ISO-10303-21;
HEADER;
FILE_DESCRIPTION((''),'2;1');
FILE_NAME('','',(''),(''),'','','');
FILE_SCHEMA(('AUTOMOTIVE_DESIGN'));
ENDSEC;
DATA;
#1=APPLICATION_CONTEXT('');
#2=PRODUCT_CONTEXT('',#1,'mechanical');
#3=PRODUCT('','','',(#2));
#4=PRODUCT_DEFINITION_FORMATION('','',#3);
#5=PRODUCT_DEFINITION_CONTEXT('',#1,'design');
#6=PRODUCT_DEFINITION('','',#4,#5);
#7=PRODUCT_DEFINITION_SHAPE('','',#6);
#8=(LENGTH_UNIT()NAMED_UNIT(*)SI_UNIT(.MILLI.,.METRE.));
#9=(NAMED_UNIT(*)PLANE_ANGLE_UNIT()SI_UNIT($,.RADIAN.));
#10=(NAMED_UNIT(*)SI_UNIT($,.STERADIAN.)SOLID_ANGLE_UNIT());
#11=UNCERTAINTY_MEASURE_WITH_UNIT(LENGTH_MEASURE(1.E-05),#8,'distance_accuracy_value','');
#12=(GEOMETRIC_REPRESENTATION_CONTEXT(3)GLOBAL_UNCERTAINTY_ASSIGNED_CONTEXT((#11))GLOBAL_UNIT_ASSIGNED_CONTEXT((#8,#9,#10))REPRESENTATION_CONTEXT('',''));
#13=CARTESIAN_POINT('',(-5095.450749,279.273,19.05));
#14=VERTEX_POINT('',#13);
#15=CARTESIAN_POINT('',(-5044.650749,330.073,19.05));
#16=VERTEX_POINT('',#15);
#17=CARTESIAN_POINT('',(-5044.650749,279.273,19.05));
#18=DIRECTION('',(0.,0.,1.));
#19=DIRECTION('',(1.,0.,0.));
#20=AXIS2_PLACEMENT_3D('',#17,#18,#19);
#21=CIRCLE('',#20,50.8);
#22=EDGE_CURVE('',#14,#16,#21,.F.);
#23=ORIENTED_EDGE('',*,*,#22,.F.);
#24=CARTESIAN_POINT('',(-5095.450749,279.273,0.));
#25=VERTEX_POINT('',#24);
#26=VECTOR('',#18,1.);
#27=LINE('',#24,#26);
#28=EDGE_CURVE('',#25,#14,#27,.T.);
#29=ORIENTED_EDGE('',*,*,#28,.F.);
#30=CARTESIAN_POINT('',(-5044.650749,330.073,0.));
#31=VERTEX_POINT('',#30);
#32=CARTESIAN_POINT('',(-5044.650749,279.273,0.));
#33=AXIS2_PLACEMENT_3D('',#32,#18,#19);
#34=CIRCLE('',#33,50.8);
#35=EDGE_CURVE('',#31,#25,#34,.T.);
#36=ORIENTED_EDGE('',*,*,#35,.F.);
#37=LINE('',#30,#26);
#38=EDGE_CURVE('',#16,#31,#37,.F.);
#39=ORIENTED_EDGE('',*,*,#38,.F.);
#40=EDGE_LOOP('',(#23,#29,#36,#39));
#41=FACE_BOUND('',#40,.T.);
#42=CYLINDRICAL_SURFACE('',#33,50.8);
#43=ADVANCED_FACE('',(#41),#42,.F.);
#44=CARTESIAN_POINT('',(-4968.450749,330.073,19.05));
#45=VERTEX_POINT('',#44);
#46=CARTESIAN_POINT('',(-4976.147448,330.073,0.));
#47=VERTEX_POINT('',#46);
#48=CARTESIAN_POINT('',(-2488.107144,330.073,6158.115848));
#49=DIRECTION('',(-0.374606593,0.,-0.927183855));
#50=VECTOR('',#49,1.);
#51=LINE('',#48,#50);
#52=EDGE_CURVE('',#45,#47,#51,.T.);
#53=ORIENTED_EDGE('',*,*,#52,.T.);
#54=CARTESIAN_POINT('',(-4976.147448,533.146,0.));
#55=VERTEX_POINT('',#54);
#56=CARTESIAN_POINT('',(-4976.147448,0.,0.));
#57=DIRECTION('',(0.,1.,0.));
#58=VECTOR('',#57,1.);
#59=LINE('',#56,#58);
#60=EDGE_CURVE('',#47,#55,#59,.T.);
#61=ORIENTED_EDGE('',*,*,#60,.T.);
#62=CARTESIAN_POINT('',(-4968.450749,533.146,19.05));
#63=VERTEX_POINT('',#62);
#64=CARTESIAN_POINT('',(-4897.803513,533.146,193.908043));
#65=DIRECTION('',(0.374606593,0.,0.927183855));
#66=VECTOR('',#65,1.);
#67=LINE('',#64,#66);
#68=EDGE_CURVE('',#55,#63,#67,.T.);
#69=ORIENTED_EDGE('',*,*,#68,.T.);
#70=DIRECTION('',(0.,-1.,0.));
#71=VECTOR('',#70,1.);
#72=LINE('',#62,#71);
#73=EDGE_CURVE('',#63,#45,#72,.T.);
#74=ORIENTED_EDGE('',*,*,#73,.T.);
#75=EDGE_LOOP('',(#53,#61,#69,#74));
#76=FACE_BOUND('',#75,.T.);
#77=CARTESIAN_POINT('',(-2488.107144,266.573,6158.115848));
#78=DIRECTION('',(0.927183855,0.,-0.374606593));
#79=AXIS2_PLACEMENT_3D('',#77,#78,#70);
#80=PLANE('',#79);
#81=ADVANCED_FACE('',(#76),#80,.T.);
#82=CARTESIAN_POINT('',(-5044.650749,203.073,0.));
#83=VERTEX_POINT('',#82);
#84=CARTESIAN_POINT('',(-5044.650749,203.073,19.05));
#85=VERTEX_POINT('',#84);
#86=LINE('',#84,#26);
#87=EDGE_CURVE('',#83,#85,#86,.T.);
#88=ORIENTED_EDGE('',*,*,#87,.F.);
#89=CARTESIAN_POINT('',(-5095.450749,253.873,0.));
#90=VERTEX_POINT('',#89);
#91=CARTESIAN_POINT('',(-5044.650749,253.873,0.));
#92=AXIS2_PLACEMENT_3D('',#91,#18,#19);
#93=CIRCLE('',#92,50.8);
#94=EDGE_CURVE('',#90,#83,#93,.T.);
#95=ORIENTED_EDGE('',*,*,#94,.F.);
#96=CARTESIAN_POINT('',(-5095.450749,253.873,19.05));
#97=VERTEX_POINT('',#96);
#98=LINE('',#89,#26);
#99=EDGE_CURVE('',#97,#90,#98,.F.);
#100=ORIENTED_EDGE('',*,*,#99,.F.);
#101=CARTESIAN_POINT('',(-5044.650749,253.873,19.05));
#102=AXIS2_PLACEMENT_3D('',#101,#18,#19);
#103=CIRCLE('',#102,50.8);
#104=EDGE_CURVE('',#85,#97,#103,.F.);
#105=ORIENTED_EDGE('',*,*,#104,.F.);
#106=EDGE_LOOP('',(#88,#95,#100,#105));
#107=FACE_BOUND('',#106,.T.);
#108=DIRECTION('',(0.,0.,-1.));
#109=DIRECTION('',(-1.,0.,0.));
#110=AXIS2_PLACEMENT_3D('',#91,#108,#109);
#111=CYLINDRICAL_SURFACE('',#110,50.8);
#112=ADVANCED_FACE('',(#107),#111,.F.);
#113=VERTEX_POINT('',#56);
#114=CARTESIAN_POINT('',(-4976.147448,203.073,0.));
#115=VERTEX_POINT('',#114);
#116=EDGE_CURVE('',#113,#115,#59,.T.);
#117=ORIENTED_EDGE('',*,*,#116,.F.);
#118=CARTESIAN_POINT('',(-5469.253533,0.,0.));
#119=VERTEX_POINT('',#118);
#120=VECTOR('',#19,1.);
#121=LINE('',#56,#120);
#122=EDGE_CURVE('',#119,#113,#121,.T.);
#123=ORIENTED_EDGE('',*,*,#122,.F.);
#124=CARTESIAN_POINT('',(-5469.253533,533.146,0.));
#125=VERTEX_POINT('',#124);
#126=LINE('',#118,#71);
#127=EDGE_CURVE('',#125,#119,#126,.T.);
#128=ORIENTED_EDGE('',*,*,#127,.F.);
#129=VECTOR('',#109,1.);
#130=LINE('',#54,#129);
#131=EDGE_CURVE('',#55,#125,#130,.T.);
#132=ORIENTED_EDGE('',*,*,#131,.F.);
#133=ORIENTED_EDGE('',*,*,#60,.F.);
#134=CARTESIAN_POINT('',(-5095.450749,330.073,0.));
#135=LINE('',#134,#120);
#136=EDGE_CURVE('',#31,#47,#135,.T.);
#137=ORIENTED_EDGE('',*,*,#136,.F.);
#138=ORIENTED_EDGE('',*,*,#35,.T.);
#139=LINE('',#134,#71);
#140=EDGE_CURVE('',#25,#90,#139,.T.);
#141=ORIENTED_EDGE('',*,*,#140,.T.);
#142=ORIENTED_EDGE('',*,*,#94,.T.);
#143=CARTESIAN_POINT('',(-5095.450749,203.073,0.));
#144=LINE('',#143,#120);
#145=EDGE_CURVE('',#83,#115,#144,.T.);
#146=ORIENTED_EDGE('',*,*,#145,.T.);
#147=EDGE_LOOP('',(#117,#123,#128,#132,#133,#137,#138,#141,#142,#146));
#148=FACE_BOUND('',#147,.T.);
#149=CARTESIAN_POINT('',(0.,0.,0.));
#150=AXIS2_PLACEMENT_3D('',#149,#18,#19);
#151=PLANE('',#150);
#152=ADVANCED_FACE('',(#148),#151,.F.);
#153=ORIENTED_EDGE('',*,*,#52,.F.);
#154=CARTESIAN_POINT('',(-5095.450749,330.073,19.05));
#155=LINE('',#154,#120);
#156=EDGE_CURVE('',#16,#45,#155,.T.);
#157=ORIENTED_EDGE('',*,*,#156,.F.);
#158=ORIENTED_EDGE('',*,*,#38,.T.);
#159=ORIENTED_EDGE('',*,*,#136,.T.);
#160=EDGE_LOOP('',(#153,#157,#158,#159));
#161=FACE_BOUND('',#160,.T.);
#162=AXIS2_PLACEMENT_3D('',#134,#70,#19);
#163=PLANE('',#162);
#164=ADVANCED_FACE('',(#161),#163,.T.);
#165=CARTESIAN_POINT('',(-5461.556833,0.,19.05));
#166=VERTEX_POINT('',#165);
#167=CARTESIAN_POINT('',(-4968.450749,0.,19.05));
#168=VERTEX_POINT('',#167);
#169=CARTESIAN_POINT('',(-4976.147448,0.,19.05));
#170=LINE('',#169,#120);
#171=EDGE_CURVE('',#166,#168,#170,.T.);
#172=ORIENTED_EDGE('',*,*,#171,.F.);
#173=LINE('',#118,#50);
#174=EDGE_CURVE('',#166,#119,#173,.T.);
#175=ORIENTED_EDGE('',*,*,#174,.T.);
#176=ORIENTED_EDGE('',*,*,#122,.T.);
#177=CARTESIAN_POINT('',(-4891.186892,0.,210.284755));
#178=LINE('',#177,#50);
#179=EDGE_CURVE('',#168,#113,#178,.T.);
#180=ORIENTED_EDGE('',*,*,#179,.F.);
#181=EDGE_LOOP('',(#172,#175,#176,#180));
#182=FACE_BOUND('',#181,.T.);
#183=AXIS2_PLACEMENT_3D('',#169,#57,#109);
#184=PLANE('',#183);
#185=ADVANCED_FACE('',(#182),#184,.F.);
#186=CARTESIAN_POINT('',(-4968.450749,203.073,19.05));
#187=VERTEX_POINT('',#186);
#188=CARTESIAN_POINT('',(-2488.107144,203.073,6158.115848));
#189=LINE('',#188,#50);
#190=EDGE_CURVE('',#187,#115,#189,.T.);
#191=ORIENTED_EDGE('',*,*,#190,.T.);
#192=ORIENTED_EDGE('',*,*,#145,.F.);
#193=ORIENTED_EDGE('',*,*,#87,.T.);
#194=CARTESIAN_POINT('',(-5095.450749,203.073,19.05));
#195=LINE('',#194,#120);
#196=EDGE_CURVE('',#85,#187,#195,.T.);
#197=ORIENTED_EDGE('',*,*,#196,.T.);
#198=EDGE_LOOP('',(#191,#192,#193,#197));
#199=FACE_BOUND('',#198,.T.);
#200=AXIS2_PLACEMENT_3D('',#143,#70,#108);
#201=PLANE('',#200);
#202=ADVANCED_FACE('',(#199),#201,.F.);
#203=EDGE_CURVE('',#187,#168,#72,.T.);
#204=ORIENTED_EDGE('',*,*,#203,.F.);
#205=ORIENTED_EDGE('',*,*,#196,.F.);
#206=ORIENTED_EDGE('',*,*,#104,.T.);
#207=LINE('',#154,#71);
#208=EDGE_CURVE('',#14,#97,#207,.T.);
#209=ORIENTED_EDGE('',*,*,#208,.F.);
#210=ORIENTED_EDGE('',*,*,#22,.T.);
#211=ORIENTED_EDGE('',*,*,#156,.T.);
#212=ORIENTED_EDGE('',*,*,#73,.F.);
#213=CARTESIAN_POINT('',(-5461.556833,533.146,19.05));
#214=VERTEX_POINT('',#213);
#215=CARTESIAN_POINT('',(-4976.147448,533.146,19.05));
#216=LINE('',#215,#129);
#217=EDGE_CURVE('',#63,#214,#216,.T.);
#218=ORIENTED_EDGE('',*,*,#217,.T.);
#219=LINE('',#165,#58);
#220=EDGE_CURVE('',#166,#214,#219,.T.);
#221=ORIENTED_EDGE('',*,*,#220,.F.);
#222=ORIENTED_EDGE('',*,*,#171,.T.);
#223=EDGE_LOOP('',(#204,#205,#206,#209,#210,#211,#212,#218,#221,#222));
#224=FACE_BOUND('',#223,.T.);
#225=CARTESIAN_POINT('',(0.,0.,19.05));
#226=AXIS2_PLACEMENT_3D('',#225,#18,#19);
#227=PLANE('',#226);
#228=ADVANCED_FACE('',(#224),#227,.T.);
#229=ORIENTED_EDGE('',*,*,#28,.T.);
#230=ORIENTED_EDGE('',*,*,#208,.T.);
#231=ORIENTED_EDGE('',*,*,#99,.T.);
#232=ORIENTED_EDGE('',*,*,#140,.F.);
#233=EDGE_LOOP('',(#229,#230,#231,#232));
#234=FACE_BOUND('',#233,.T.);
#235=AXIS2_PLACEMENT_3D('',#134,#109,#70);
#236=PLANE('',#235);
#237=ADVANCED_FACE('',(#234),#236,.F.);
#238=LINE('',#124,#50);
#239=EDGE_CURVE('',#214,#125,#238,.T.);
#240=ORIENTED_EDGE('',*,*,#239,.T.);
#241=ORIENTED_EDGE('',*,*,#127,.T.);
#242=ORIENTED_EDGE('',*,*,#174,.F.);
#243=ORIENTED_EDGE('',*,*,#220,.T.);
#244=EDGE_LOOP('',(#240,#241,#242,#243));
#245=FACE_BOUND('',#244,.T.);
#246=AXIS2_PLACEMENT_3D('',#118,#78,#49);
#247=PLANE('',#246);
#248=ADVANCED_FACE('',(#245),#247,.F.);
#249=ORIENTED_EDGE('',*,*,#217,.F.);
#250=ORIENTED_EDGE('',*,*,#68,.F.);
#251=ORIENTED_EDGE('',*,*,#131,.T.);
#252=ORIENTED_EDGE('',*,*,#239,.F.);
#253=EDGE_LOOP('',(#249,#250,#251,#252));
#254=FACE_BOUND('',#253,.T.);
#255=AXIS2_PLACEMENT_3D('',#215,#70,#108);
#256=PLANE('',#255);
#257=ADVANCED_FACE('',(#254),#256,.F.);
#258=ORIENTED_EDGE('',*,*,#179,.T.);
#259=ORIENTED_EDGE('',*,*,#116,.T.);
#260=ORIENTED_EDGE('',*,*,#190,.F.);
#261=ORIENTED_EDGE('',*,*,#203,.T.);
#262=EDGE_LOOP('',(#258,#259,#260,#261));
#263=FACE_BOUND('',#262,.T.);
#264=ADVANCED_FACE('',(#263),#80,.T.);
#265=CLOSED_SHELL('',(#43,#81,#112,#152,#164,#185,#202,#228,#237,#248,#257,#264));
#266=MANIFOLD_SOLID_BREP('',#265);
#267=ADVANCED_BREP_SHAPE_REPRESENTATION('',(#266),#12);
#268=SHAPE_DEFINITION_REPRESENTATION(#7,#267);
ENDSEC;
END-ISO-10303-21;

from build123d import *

# Parameters (mm, degrees)
SKETCH1_W           = 493.106084352
SKETCH1_H           = 533.146
BOSS_EXTRUDE1_DEPTH = 19.05
BOSS_EXTRUDE3_DEPTH = 533.146
CUT_EXTRUDE1_DEPTH  = 5496.210802379
SKETCH5_W           = 127
SKETCH5_H           = 127
CUT_EXTRUDE2_DEPTH  = 5496.210802379
FILLET1_R           = 50.8


with BuildPart() as part:
    # Sketch1 → Boss-Extrude1 (new body)
    with BuildSketch(Plane.XY):
        with Locations((-5222.700490325, 266.573)):
            Rectangle(SKETCH1_W, SKETCH1_H)
    extrude(amount=BOSS_EXTRUDE1_DEPTH)

    # Boss-Extrude3: read off the stored shape, not the designer's step
    # Boss-Extrude3 outline → Boss-Extrude3 (add)
    with BuildSketch(Plane(origin=(0, 0, 0), x_dir=(1, 0, 0), z_dir=(0, 1, 0))):
        Polygon((-4976.147448149, -19.05), (-4968.450748546, -19.05), (-4976.147448148, 0), align=None)
    extrude(amount=BOSS_EXTRUDE3_DEPTH)

    # Sketch2 → Cut-Extrude1 (cut, through all)
    with BuildSketch(Plane(origin=(0, 533.146, 0), x_dir=(1, 0, 0), z_dir=(0, 1, 0))):
        Polygon((-5469.253532501, 0), (-5461.556832899, -19.05), (-5469.253532501, -19.05), align=None)
    extrude(amount=-CUT_EXTRUDE1_DEPTH, mode=Mode.SUBTRACT)

    # Sketch5 → Cut-Extrude2 (cut, through all)
    with BuildSketch(Plane.XY.offset(19.05)):
        with Locations((-5031.950748546, 266.573)):
            Rectangle(SKETCH5_W, SKETCH5_H)
    extrude(amount=-CUT_EXTRUDE2_DEPTH, mode=Mode.SUBTRACT)

    # Fillet1
    fillet1_edges = [part.edges().sort_by_distance(p)[0] for p in [
        (-5095.450748546, 330.073, 9.525),
        (-5095.450748546, 203.073, 9.525),
    ]]
    fillet(fillet1_edges, radius=FILLET1_R)


solid = part.part
